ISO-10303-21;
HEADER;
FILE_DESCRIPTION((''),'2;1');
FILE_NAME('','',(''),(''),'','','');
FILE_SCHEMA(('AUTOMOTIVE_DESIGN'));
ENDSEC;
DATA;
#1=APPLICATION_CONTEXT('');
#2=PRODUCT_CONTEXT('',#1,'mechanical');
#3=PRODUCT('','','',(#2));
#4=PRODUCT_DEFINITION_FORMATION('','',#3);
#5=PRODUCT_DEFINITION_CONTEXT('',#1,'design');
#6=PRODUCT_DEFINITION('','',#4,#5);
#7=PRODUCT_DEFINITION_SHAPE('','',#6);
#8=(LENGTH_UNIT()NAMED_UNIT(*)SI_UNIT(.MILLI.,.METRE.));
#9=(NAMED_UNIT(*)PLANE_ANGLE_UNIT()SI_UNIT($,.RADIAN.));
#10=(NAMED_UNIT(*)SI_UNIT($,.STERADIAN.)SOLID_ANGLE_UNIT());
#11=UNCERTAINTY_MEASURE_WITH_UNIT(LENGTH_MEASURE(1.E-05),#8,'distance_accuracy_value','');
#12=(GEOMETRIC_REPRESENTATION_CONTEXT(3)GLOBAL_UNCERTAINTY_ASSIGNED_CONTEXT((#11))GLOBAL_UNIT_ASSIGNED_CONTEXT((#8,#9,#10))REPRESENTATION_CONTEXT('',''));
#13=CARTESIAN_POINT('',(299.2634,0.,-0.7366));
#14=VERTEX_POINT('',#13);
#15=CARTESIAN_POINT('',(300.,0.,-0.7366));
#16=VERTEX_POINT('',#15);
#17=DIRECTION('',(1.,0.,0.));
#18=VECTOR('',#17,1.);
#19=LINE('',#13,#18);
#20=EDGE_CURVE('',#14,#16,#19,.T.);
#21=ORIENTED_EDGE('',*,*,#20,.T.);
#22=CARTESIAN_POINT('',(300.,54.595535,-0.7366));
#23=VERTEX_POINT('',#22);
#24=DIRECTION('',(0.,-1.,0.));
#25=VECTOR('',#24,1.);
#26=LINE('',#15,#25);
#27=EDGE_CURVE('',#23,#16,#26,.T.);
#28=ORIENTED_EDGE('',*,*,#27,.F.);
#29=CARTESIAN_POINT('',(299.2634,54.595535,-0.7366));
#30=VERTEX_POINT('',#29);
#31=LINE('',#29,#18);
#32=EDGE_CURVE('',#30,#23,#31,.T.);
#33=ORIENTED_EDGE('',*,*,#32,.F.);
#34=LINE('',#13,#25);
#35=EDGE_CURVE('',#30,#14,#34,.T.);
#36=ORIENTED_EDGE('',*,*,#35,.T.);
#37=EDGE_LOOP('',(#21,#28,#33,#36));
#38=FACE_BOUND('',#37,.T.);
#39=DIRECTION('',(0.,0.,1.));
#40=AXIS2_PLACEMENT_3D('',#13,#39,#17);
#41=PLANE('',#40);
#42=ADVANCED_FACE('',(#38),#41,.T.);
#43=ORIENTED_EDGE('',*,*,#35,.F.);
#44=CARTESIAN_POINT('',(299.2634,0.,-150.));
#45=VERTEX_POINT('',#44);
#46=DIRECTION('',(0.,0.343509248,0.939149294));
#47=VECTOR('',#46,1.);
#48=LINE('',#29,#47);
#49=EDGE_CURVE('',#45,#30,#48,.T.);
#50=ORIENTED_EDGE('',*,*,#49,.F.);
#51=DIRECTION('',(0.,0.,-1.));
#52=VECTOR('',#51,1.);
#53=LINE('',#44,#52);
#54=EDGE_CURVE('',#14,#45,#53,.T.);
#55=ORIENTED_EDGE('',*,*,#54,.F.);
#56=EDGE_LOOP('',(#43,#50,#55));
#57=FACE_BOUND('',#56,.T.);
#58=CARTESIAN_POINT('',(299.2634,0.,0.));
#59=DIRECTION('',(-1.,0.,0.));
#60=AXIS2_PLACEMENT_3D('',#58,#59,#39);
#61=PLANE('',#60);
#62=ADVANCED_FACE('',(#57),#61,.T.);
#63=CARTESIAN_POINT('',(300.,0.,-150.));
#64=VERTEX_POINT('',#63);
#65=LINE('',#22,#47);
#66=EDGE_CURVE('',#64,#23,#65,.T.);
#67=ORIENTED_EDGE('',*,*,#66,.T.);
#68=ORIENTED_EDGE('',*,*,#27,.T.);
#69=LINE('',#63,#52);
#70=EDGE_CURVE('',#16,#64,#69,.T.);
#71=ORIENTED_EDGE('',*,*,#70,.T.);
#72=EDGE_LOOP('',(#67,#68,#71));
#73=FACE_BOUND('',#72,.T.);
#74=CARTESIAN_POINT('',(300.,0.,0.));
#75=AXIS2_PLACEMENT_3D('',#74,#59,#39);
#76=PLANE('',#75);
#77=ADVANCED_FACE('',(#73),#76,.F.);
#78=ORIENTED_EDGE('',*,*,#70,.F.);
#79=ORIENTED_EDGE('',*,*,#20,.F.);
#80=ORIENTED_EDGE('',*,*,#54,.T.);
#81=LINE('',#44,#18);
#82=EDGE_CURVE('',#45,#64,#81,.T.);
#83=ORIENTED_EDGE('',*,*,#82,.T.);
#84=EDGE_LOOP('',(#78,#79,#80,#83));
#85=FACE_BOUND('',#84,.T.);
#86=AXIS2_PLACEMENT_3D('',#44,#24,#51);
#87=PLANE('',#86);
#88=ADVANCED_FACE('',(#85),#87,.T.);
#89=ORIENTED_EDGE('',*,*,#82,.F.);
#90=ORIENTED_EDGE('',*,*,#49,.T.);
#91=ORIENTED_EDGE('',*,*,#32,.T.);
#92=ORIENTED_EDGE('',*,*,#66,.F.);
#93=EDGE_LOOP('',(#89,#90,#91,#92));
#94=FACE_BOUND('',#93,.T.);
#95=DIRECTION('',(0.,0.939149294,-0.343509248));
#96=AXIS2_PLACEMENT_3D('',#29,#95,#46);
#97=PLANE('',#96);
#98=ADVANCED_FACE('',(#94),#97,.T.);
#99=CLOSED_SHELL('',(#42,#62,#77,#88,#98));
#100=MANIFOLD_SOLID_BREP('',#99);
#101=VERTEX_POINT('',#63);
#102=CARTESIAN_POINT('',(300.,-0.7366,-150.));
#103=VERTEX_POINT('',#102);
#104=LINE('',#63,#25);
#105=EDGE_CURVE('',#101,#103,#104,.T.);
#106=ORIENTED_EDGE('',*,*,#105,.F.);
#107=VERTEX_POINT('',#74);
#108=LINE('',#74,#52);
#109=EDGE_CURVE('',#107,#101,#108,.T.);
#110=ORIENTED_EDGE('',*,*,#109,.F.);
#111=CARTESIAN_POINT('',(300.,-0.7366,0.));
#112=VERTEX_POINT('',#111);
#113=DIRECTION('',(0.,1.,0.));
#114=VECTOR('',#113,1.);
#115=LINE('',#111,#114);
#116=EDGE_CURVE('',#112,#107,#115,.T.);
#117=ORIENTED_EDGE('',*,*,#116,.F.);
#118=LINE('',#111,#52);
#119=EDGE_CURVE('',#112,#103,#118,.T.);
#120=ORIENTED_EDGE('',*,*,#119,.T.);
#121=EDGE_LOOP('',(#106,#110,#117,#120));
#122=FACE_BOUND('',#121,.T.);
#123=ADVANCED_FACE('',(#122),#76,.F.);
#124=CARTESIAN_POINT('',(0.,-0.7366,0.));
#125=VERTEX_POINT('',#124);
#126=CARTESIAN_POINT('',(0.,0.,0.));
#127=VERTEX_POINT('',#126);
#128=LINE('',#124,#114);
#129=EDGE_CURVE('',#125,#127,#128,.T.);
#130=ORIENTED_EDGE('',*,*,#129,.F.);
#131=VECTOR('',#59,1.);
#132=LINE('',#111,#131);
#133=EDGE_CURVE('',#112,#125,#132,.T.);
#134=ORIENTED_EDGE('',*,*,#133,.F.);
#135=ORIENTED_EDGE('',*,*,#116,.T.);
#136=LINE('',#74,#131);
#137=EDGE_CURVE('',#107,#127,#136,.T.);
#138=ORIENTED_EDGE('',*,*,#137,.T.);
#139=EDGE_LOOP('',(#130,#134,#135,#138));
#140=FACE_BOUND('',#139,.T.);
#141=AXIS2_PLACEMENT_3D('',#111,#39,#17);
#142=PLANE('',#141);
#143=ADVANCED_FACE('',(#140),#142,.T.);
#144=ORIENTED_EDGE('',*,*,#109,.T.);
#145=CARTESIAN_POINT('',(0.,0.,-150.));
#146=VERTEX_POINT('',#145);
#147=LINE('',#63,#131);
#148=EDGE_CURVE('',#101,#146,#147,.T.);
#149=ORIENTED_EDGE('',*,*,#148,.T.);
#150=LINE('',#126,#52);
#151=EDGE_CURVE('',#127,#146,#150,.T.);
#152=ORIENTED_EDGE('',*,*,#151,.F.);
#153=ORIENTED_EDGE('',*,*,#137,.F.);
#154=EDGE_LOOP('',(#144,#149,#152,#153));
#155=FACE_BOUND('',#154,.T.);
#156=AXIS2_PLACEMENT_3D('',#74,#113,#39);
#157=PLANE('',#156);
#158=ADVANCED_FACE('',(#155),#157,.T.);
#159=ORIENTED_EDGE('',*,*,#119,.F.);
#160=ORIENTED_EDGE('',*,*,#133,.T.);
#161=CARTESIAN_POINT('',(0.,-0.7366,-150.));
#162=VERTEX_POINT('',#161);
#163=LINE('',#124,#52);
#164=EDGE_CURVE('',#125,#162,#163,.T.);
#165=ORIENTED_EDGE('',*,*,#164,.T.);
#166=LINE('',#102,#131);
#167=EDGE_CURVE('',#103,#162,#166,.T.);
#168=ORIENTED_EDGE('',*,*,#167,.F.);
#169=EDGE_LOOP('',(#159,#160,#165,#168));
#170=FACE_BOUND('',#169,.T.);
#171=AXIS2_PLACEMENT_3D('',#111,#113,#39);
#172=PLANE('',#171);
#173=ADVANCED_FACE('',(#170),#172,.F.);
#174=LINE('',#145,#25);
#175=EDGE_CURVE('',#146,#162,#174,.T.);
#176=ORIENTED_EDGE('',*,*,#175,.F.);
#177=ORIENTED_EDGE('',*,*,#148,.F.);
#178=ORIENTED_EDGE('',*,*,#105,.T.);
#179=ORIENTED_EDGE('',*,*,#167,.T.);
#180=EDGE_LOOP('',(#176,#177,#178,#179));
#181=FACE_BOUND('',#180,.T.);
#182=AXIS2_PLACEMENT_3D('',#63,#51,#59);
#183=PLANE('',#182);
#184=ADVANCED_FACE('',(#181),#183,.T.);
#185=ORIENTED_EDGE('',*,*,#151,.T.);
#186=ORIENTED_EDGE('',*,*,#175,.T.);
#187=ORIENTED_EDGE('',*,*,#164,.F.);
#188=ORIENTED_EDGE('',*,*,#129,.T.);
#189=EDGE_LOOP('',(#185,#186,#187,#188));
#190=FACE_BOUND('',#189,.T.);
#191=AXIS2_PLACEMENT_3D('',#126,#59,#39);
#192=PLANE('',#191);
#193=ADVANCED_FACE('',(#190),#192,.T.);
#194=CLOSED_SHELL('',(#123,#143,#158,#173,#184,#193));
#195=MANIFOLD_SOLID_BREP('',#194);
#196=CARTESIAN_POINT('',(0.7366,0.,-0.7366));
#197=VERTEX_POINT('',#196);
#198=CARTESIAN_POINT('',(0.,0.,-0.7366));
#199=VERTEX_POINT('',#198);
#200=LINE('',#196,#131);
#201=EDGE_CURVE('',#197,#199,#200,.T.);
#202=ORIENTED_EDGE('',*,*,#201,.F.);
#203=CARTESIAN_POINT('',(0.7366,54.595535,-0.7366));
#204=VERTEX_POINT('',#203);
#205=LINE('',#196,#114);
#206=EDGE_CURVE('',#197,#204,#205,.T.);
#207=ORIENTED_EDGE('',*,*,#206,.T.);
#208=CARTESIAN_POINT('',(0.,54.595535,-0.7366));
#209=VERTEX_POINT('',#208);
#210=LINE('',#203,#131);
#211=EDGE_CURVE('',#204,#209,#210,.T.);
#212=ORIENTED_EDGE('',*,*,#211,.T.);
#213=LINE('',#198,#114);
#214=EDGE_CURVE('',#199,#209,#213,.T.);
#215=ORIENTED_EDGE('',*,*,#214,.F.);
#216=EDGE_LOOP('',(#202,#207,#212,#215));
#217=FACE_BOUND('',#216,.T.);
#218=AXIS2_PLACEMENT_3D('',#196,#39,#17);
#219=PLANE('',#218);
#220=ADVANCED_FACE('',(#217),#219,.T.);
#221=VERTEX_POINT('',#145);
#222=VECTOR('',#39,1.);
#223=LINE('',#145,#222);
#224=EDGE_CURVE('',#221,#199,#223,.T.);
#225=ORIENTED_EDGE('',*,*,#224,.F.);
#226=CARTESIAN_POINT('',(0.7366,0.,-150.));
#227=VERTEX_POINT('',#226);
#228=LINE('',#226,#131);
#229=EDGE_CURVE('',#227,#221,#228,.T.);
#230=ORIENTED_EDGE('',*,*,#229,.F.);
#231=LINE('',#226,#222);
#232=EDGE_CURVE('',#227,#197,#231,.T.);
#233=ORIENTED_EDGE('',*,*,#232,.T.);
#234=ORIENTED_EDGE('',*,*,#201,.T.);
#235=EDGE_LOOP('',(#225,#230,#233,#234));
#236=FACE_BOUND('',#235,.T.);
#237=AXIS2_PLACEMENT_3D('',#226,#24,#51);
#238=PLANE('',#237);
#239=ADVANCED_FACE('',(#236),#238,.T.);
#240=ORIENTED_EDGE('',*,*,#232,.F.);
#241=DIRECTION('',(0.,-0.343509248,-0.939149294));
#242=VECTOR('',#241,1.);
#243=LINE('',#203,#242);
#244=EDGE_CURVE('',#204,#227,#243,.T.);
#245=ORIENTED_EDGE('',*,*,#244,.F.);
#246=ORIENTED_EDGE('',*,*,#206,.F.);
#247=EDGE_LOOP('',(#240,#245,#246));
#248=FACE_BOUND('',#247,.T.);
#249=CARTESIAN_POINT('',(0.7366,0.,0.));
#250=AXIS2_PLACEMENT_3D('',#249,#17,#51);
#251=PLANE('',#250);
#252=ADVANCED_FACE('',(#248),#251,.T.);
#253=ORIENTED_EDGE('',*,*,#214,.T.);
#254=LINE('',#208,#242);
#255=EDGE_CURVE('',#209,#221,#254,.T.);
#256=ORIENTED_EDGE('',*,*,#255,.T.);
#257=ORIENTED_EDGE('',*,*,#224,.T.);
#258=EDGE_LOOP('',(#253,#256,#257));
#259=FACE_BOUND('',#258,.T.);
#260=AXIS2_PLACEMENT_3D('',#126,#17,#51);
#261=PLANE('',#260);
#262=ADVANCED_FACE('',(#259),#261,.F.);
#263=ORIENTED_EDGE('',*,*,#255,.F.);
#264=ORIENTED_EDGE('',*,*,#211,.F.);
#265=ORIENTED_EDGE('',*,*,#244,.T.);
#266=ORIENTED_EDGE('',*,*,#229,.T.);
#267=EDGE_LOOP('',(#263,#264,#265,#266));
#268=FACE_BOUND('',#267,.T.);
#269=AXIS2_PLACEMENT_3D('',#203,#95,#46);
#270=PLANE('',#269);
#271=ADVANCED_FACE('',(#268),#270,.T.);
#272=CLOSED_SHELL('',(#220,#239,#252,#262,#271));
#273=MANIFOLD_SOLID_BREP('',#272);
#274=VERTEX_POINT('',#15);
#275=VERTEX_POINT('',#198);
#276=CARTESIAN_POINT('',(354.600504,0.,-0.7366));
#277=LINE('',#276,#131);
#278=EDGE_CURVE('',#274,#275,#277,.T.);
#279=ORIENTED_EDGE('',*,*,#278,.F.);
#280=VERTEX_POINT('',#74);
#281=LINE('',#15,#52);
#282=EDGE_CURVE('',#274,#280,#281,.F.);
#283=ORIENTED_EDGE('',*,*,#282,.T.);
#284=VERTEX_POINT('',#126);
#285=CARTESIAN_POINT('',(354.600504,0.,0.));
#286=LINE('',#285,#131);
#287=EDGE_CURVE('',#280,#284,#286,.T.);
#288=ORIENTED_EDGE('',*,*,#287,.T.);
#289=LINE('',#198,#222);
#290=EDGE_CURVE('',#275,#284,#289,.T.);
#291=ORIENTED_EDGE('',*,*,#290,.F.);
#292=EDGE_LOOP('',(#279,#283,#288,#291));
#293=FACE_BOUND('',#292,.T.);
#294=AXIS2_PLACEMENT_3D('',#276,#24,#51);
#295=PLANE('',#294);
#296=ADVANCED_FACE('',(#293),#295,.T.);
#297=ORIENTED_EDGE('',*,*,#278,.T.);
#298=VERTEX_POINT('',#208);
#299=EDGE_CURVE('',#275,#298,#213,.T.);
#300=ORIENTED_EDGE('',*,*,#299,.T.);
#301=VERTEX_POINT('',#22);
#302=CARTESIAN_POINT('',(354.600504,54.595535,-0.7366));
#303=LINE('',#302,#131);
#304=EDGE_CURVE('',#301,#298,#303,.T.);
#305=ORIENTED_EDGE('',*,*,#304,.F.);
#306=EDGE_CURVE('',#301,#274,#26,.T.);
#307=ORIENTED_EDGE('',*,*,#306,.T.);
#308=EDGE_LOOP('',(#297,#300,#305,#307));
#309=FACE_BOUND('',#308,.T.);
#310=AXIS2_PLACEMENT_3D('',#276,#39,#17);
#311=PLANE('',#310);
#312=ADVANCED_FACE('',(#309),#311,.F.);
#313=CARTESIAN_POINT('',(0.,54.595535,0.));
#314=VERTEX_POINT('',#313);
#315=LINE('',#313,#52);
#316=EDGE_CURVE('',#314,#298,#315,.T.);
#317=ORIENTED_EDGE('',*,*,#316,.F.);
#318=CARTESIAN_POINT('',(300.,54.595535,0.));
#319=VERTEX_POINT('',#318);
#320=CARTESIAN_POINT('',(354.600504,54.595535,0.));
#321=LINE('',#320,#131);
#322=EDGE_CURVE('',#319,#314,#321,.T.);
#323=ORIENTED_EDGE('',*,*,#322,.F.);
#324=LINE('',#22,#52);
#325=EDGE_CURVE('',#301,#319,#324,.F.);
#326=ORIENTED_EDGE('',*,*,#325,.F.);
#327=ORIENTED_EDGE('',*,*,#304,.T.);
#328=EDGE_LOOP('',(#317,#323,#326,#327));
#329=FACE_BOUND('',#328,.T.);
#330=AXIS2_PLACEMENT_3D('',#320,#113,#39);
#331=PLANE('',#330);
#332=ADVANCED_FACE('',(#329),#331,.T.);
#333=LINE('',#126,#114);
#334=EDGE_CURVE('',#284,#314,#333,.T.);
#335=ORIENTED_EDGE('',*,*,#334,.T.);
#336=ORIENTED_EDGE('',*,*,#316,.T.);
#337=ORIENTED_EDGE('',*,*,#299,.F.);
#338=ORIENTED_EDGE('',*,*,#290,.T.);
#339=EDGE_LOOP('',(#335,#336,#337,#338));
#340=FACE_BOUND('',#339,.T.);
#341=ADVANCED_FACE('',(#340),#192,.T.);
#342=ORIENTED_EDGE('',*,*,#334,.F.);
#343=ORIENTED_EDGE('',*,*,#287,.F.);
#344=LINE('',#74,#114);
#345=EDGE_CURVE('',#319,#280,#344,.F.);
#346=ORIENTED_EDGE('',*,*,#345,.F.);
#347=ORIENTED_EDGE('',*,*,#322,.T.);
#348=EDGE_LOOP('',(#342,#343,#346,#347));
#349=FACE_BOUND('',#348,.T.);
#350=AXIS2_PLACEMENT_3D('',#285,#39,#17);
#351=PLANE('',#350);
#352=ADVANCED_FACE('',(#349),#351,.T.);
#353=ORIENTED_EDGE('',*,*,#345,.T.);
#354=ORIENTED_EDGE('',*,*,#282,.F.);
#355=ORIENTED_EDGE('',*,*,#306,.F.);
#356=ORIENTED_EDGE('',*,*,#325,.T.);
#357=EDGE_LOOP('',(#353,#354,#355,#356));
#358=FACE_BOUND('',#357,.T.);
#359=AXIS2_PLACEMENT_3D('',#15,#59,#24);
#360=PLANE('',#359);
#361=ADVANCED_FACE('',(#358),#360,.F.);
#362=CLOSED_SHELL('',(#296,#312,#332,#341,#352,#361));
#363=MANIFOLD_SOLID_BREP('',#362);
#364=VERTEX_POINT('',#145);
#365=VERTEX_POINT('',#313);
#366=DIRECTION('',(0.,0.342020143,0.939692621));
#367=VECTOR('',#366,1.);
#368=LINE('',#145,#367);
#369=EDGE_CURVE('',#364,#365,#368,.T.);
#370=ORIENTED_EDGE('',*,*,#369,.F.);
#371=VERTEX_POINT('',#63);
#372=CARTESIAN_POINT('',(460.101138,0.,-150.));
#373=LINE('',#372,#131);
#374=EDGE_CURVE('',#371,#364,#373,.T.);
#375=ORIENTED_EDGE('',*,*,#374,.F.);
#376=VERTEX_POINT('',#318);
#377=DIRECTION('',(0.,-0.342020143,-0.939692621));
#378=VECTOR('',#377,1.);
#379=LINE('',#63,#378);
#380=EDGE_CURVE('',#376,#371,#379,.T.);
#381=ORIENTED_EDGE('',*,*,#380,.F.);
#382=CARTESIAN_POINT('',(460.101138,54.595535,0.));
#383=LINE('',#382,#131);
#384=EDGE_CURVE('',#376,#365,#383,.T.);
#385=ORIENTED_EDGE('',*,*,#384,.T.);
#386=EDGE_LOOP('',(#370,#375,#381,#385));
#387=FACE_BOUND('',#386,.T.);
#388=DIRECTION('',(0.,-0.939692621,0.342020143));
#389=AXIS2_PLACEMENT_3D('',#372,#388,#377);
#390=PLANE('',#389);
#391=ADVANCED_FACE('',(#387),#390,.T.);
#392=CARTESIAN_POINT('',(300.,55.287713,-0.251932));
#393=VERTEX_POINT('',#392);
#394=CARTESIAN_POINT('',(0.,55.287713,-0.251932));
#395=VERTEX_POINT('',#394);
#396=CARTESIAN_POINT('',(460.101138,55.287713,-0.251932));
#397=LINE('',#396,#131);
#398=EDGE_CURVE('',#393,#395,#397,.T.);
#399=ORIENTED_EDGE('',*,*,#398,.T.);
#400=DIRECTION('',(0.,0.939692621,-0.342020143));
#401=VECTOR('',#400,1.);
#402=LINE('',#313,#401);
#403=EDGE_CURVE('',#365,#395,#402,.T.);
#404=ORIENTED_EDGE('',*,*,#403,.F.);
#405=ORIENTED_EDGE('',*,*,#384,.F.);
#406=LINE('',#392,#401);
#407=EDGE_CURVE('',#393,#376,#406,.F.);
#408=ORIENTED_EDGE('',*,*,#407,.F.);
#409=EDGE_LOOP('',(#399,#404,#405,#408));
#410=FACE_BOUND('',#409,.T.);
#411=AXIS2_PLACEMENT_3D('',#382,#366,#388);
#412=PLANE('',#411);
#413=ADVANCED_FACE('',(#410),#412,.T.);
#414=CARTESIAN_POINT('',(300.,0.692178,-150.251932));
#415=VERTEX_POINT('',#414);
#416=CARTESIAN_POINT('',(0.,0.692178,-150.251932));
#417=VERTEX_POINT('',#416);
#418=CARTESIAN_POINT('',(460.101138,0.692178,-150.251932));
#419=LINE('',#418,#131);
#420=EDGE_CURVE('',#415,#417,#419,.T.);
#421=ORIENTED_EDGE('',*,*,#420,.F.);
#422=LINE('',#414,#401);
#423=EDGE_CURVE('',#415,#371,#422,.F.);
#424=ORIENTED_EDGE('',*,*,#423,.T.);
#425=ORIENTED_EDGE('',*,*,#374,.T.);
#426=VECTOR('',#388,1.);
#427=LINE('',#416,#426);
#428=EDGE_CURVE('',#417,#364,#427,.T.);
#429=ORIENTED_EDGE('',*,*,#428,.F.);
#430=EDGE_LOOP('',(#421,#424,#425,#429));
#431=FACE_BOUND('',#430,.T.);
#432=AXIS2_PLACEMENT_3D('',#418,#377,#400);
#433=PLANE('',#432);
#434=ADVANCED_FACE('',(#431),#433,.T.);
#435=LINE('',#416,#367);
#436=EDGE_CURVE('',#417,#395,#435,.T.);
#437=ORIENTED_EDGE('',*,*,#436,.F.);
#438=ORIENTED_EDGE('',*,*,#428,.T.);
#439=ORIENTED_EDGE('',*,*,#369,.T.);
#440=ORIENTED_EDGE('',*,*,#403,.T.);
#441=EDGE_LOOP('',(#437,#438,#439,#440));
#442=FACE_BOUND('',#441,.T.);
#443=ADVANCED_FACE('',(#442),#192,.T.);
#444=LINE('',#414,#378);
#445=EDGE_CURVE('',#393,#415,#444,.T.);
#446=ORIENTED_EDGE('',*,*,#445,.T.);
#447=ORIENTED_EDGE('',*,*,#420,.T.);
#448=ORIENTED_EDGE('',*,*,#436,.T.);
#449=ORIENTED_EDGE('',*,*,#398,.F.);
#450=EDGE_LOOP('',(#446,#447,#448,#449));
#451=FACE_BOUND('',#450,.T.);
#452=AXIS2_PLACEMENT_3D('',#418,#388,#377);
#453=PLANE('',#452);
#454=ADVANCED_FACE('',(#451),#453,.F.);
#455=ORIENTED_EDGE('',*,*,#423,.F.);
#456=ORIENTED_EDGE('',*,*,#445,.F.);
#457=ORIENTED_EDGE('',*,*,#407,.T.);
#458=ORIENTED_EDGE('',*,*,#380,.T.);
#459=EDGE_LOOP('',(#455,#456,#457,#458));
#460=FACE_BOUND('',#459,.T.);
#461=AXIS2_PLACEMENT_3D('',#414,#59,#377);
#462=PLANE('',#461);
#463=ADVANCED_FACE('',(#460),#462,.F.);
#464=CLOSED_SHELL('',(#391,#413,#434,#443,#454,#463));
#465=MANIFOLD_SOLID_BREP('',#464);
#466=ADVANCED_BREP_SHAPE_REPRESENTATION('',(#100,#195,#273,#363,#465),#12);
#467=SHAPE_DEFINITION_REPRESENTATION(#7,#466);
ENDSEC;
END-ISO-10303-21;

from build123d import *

# Parameters (mm, degrees)
SZKIC2_W               = 150
SZKIC2_H               = 0.7366
ODGI_CIE_BAZOWE1_DEPTH = 300
ODGI_CIE_BAZOWE2_DEPTH = 300
SZKIC10_W              = 0.7366
SZKIC10_H              = 54.59553514
ODGI_CIE_BAZOWE3_DEPTH = 300
ODGI_CIE_BAZOWE4_DEPTH = 0.7366
ODGI_CIE_BAZOWE5_DEPTH = 0.7366


# Sheet-metal steps are written as plain solids
with BuildPart() as part:
    # Szkic2 → Odgięcie bazowe1 (new body)
    with BuildSketch(Plane(origin=(0, 0, 0), x_dir=(0, 0, -1), z_dir=(1, 0, 0))):
        with Locations((75, -0.3683)):
            Rectangle(SZKIC2_W, SZKIC2_H)
    extrude(amount=ODGI_CIE_BAZOWE1_DEPTH)


with BuildPart() as body_2:
    # Szkic7 → Odgięcie bazowe2 (new body)
    with BuildSketch(Plane(origin=(0, 0, 0), x_dir=(0, 0, -1), z_dir=(1, 0, 0))):
        Polygon((150, 0), (0, 54.59553514), (0.251932038, 55.287712724), (150.251932038, 0.692177584), align=None)
    extrude(amount=ODGI_CIE_BAZOWE2_DEPTH)


with BuildPart() as body_3:
    # Szkic10 → Odgięcie bazowe3 (new body)
    with BuildSketch(Plane(origin=(0, 0, 0), x_dir=(0, 0, -1), z_dir=(1, 0, 0))):
        with Locations((0.3683, 27.29776757)):
            Rectangle(SZKIC10_W, SZKIC10_H)
    extrude(amount=ODGI_CIE_BAZOWE3_DEPTH)


with BuildPart() as body_4:
    # Szkic15 → Odgięcie bazowe4 (new body)
    with BuildSketch(Plane.ZY):
        Polygon((-0.7366, 54.59553514), (-150, 0), (-0.7366, 0), align=None)
    extrude(amount=-ODGI_CIE_BAZOWE4_DEPTH)


with BuildPart() as body_5:
    # Szkic18 → Odgięcie bazowe5 (new body)
    with BuildSketch(Plane(origin=(300, 0, 0), x_dir=(0, 0, -1), z_dir=(1, 0, 0))):
        Polygon((0.7366, 0), (0.7366, 54.59553514), (150, 0), align=None)
    extrude(amount=-ODGI_CIE_BAZOWE5_DEPTH)


solid = Compound([part.part, body_2.part, body_3.part, body_4.part, body_5.part])
